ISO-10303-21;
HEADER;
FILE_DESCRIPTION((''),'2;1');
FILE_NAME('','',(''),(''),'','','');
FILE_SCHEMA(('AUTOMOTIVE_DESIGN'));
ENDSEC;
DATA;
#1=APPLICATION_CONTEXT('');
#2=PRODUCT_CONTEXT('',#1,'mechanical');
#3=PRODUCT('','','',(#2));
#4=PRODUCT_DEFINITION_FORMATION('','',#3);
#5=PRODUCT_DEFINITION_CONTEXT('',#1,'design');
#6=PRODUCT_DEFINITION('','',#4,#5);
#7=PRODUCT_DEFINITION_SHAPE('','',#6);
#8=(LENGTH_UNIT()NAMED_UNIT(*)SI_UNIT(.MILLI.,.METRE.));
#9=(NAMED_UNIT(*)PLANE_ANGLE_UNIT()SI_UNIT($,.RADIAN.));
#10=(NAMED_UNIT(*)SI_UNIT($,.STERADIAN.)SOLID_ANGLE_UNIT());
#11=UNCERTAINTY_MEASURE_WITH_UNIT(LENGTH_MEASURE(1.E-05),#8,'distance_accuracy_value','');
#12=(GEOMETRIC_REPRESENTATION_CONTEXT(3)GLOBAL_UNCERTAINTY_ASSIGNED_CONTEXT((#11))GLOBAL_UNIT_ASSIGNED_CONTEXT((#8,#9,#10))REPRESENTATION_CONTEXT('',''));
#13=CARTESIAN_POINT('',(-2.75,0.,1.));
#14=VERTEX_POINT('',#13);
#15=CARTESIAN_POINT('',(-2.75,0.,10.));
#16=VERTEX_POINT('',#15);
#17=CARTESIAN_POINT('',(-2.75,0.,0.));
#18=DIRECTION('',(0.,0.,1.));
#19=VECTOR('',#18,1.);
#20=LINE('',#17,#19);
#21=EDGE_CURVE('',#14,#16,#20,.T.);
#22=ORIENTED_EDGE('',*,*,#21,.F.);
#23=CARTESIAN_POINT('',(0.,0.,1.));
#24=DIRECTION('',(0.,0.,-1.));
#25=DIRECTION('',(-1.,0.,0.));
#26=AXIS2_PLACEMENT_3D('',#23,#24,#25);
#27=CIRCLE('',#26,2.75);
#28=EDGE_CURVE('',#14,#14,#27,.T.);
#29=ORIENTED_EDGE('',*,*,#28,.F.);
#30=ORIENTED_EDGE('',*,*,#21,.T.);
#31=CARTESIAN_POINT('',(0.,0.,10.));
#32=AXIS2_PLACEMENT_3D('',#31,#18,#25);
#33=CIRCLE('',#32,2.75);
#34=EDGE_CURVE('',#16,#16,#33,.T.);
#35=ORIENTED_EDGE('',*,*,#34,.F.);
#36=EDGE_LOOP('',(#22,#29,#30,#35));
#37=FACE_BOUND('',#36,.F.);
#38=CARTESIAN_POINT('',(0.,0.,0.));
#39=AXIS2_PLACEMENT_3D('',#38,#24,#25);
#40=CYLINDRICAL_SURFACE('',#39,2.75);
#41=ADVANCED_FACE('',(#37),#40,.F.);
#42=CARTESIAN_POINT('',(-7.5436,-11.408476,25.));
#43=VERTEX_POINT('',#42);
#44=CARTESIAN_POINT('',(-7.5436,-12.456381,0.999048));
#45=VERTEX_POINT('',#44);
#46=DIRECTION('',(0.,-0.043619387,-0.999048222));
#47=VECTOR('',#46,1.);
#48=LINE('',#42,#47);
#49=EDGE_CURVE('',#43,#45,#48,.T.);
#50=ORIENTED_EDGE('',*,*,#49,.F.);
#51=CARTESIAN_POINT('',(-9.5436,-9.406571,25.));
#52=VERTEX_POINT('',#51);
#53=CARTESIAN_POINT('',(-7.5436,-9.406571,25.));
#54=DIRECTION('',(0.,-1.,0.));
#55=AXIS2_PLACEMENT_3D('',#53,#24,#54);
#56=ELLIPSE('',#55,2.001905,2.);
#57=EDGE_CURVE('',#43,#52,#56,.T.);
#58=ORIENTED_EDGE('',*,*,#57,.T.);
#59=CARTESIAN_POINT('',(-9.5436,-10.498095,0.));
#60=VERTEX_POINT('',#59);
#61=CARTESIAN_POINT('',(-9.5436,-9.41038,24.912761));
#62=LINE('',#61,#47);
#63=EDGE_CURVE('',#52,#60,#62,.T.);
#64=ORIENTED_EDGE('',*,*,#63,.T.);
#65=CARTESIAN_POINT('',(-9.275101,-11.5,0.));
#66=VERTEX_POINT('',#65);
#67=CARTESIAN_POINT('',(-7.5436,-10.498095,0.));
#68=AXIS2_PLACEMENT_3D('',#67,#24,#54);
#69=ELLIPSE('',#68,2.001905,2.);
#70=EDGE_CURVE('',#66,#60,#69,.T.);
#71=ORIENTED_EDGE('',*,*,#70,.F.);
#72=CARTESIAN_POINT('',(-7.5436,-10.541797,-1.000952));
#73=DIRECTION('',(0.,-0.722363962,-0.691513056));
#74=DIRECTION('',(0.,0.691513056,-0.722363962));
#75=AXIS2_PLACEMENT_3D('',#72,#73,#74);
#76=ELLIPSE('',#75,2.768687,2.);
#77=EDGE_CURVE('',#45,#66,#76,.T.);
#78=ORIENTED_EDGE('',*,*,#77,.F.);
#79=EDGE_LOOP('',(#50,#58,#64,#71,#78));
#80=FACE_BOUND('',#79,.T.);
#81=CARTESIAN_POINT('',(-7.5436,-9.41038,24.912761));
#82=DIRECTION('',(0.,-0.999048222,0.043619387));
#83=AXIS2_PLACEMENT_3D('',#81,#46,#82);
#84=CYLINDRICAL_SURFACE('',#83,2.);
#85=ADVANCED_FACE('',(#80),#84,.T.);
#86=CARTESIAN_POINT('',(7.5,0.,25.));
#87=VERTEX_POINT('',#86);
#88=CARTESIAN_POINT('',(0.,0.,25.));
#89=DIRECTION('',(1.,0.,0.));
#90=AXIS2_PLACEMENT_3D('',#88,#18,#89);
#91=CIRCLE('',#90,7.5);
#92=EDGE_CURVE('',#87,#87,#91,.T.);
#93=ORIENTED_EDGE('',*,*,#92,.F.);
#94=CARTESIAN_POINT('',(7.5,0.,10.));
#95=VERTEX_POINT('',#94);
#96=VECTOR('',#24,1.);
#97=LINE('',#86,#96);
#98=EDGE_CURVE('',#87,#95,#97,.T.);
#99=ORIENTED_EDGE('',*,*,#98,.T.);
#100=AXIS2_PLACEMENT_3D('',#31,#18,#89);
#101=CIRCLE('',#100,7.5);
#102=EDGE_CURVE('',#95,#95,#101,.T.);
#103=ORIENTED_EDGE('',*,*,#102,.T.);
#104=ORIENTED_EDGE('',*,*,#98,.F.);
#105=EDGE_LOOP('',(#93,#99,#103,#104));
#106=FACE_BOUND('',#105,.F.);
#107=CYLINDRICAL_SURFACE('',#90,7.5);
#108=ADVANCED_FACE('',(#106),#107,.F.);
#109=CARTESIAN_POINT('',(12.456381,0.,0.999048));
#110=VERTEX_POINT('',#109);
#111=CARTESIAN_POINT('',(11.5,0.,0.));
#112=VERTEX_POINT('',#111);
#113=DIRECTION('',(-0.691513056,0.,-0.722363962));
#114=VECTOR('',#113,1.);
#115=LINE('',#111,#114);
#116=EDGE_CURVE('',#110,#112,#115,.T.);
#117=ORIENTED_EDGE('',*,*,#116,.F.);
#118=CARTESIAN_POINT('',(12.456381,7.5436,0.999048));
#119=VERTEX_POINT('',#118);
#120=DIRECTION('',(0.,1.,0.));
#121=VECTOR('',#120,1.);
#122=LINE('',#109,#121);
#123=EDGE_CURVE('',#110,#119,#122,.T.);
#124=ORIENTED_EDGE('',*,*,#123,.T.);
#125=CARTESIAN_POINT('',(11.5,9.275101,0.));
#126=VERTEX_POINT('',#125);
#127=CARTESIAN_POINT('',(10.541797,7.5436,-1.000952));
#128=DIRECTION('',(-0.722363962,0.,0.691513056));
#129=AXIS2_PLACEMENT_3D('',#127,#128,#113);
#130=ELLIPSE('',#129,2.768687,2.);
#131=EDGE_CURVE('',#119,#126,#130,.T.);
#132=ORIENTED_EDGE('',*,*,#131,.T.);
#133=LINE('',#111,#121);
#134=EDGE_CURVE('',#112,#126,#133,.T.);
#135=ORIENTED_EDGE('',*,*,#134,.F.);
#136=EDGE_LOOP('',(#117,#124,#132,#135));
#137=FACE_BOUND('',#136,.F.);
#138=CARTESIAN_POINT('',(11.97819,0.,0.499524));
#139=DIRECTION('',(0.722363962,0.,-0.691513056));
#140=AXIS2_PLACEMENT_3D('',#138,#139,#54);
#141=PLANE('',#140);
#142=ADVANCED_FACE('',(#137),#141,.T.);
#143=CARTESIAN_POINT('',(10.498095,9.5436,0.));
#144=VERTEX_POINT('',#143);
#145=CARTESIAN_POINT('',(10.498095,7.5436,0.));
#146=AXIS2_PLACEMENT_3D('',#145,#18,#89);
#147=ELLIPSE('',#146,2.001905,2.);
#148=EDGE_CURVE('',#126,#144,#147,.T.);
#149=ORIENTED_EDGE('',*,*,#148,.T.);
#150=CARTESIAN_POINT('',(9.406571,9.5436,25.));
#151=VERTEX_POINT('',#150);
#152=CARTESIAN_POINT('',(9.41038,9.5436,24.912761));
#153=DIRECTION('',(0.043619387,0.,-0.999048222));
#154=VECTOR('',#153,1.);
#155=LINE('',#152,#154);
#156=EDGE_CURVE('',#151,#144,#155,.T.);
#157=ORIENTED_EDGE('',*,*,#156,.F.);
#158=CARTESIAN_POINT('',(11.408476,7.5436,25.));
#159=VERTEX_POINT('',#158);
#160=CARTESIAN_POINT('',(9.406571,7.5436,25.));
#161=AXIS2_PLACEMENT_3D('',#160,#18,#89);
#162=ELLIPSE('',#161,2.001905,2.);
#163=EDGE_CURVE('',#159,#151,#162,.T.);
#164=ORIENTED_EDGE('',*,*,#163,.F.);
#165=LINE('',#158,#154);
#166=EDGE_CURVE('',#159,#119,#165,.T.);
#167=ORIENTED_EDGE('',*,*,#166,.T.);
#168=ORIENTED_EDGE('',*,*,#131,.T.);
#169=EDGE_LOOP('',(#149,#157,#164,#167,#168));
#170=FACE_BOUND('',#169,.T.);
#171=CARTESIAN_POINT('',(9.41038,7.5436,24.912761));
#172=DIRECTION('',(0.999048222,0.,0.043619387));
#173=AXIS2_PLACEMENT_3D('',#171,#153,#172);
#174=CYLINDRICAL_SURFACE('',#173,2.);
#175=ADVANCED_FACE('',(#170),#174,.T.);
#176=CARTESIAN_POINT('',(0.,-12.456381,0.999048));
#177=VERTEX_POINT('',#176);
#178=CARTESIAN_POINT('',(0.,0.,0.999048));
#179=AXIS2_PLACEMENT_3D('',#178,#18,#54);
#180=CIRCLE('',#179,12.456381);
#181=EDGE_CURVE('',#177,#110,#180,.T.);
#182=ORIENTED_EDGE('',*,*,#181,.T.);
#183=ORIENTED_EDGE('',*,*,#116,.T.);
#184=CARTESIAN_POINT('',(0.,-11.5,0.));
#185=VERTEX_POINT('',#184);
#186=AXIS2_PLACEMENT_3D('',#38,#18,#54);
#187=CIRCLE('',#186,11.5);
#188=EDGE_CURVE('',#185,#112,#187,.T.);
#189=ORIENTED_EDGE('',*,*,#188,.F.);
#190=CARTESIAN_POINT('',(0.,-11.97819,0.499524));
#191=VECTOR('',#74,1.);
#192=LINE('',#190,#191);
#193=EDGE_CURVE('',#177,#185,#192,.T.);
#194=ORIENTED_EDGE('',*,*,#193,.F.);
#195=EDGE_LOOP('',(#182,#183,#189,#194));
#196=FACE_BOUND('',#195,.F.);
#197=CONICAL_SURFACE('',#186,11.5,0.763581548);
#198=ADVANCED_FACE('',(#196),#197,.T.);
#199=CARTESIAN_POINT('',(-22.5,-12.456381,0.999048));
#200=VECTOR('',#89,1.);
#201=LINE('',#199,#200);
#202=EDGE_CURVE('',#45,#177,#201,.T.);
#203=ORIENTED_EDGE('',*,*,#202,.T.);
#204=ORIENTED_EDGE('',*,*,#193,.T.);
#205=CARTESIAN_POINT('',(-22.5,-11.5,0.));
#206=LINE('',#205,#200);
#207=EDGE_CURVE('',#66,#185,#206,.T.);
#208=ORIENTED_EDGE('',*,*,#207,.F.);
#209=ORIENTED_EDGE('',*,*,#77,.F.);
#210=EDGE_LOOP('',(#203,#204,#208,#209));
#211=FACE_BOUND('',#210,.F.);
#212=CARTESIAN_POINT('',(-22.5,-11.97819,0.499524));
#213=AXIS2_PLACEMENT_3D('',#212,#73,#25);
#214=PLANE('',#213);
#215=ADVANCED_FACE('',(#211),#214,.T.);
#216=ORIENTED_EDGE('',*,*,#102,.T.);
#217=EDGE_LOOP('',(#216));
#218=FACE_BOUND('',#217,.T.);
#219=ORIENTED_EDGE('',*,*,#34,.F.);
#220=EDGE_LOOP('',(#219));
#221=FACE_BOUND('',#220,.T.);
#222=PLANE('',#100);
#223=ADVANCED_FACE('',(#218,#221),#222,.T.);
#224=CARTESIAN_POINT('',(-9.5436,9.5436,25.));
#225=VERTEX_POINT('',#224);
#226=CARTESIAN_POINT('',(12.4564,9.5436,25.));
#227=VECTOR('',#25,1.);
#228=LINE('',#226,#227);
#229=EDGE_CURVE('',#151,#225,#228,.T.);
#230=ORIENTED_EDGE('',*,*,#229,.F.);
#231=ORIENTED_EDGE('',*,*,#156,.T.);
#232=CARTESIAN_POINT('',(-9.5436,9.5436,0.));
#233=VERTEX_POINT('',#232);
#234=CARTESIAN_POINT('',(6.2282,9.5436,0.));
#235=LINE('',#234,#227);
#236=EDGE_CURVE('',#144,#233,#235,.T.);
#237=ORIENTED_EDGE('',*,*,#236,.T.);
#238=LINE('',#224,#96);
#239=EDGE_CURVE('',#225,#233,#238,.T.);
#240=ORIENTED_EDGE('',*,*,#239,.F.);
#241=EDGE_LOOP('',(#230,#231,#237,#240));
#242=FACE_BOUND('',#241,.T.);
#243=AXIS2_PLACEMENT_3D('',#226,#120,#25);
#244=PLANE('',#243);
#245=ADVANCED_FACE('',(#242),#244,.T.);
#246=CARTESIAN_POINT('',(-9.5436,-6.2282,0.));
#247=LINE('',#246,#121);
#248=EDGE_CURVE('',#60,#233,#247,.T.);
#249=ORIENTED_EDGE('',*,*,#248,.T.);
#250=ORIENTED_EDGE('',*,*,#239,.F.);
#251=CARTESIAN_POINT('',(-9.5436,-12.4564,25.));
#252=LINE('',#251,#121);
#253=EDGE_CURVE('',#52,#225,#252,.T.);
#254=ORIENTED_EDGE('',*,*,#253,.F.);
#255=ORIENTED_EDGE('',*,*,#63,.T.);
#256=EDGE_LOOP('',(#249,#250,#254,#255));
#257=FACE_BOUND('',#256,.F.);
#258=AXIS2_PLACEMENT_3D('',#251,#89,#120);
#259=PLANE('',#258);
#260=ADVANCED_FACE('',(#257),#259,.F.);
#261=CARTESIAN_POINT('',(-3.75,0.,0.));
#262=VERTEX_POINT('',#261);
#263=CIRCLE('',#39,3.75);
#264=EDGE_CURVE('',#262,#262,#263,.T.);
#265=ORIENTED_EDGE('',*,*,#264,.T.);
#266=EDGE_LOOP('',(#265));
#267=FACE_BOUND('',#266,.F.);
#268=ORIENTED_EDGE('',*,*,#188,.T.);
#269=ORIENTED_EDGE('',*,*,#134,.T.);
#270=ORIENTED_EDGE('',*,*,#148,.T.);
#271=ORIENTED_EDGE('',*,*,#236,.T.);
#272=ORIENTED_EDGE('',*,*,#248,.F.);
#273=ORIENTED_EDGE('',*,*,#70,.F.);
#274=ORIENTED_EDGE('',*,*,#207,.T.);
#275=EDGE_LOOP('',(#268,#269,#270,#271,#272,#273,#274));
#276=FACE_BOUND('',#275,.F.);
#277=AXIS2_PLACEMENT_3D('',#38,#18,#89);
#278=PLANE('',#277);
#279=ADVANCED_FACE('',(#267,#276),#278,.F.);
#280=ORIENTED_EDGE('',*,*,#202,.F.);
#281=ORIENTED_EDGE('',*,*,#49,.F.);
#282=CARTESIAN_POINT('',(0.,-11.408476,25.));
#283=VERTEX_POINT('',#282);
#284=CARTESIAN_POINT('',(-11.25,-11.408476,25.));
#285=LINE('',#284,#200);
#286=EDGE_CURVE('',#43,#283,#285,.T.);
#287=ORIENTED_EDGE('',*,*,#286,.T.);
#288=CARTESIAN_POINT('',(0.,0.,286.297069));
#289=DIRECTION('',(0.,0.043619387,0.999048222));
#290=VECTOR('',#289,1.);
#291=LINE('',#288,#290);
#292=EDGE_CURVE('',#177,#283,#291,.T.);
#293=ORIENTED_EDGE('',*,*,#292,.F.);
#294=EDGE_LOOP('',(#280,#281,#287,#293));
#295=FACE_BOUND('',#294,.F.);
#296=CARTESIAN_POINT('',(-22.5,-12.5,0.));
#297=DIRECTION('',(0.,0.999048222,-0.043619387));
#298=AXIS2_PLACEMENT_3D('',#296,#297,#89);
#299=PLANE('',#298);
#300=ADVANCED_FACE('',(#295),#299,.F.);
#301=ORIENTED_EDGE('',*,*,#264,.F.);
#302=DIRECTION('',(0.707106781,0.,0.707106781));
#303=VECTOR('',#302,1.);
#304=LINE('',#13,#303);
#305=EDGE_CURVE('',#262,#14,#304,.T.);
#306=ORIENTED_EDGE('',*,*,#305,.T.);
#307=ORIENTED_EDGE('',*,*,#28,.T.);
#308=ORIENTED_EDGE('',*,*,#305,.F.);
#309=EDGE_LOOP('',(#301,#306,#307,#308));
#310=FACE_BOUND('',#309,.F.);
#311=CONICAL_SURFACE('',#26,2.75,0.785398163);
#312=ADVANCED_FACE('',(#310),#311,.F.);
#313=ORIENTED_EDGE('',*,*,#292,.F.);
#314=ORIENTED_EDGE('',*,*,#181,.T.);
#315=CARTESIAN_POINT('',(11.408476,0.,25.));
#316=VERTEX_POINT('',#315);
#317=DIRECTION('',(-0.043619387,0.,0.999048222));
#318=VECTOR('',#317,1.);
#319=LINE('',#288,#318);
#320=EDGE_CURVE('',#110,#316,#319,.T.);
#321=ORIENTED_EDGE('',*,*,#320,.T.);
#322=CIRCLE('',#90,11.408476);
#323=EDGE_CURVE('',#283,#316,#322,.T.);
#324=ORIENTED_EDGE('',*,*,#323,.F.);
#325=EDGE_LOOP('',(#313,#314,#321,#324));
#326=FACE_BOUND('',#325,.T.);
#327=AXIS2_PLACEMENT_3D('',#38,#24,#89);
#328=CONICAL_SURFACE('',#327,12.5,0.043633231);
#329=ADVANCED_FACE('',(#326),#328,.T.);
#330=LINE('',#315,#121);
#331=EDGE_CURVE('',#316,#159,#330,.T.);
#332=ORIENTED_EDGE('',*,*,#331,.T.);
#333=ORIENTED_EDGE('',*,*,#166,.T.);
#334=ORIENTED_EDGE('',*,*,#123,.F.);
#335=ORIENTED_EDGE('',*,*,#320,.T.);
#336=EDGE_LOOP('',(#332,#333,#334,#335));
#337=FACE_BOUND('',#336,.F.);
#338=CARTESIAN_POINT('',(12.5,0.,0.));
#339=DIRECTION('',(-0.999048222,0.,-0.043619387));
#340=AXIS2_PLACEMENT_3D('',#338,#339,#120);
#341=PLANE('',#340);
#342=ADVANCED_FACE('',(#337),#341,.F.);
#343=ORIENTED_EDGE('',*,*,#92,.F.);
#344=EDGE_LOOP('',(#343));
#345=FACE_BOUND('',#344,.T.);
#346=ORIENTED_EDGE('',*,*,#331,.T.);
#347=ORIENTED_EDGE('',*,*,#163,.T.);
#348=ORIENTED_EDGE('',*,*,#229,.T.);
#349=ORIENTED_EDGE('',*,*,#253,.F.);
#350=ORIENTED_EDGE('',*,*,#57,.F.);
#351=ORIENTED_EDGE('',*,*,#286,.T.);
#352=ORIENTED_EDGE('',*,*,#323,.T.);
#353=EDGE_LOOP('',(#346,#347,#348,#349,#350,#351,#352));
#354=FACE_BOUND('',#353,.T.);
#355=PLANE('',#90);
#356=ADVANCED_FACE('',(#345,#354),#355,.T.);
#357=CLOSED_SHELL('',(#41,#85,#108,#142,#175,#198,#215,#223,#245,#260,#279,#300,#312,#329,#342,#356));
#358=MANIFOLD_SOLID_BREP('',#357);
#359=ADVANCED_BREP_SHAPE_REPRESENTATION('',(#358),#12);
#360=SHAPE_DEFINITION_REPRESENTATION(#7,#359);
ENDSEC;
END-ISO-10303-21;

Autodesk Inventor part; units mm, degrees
ref_plane "YZ Plane" through (0, 0, 0) normal (1, 0, 0) x (0, 1, 0)
ref_plane "XZ Plane" through (0, 0, 0) normal (0, 1, 0) x (-1, 0, 0)
ref_plane "XY Plane" through (0, 0, 0) normal (0, 0, 1) x (1, 0, 0)
sketch "Sketch1" plane through (0, 0, 0) normal (0, 0, 1) x (1, 0, 0)
  circle A0 centre (0, 0) radius 12.5
  line L0 (12.5, 0) -> (12.5, 22.5)
  line L1 (12.5, 22.5) -> (-22.5, 22.5)
  line L2 (-22.5, 22.5) -> (-22.5, -12.5)
  line L3 (-22.5, -12.5) -> (0, -12.5)
  dimension "d0" = 25
  dimension "d1" = 35
  dimension "d2" = 35
extrude "Extrusion1" add sketch "Sketch1" along normal blind 25
draft "FaceDraft1" angle 2.5 pull direction (0, 0, 1) faces at (-15, -12.5, 8.3333) (3.6844, -11.9447, 16.6667) (12.5, 7.5, 8.3333) fixed edges at (-11.25, -12.5, 0) (8.8388, -8.8388, 0) (12.5, 11.25, 0)
sketch "Sketch2" plane through (0, 0, 0) normal (0, 0, -1) x (-1, 0, 0)
  circle A0 centre (0, 0) radius 2.75
  dimension "d6" = 5.5
extrude "Extrusion2" cut sketch "Sketch2" against normal through all
ref_plane "Work Plane1" through (0, 0, 10) normal (0, 0, -1) x (-1, 0, 0)
sketch "Sketch3" plane through (0, 0, 25) normal (0, 0, 1) x (1, 0, 0)
  circle A0 centre (0, 0) radius 2.75 projected
  circle A1 centre (0, 0) radius 7.5
  dimension "d10" = 15
extrude "Extrusion3" cut sketch "Sketch3" against normal up to surface (15 mm away)
chamfer "Chamfer1" distance 1 angle 45 6 edges at (8.8388, -8.8388, 0) (12.5, 11.25, 0) (-11.25, -12.5, 0) (2.75, 0, 0) (-5, 22.5, 0) (-22.5, 5, 0)
sketch "Sketch4" plane through (0, 0, 25) normal (0, 0, 1) x (1, 0, 0)
  line L0 (12.4564, 22.499) -> (12.4564, 0) projected
  line L1 (0, -12.4564) -> (-22.499, -12.4564) projected
  line L2 (12.4564, 9.5436) -> (-9.5436, 9.5436)
  line L3 (-9.5436, -12.4564) -> (-9.5436, 9.5436)
  arc A0 (0, -12.4564) -> (12.4564, 0) centre (0, 0) ccw projected
  line L4 (22, -23) -> (-37, -23)
  line L5 (-37, -23) -> (-37, 27)
  line L6 (-37, 27) -> (22, 27)
  line L7 (22, 27) -> (22, -23)
  point P0 (0, 0)
  dimension "d16" = 22
  dimension "d17" = 22
extrude "Extrusion4" cut sketch "Sketch4" against normal through all
fillet "Fillet1" radius 2 2 edges at (-9.5436, -11.9324, 12.9995) (11.9324, 9.5436, 12.9995)
equation "\"d2\" = d1"
equation "\"d17\" = d16"
properties part number "CornerHolder_3DPrint"
